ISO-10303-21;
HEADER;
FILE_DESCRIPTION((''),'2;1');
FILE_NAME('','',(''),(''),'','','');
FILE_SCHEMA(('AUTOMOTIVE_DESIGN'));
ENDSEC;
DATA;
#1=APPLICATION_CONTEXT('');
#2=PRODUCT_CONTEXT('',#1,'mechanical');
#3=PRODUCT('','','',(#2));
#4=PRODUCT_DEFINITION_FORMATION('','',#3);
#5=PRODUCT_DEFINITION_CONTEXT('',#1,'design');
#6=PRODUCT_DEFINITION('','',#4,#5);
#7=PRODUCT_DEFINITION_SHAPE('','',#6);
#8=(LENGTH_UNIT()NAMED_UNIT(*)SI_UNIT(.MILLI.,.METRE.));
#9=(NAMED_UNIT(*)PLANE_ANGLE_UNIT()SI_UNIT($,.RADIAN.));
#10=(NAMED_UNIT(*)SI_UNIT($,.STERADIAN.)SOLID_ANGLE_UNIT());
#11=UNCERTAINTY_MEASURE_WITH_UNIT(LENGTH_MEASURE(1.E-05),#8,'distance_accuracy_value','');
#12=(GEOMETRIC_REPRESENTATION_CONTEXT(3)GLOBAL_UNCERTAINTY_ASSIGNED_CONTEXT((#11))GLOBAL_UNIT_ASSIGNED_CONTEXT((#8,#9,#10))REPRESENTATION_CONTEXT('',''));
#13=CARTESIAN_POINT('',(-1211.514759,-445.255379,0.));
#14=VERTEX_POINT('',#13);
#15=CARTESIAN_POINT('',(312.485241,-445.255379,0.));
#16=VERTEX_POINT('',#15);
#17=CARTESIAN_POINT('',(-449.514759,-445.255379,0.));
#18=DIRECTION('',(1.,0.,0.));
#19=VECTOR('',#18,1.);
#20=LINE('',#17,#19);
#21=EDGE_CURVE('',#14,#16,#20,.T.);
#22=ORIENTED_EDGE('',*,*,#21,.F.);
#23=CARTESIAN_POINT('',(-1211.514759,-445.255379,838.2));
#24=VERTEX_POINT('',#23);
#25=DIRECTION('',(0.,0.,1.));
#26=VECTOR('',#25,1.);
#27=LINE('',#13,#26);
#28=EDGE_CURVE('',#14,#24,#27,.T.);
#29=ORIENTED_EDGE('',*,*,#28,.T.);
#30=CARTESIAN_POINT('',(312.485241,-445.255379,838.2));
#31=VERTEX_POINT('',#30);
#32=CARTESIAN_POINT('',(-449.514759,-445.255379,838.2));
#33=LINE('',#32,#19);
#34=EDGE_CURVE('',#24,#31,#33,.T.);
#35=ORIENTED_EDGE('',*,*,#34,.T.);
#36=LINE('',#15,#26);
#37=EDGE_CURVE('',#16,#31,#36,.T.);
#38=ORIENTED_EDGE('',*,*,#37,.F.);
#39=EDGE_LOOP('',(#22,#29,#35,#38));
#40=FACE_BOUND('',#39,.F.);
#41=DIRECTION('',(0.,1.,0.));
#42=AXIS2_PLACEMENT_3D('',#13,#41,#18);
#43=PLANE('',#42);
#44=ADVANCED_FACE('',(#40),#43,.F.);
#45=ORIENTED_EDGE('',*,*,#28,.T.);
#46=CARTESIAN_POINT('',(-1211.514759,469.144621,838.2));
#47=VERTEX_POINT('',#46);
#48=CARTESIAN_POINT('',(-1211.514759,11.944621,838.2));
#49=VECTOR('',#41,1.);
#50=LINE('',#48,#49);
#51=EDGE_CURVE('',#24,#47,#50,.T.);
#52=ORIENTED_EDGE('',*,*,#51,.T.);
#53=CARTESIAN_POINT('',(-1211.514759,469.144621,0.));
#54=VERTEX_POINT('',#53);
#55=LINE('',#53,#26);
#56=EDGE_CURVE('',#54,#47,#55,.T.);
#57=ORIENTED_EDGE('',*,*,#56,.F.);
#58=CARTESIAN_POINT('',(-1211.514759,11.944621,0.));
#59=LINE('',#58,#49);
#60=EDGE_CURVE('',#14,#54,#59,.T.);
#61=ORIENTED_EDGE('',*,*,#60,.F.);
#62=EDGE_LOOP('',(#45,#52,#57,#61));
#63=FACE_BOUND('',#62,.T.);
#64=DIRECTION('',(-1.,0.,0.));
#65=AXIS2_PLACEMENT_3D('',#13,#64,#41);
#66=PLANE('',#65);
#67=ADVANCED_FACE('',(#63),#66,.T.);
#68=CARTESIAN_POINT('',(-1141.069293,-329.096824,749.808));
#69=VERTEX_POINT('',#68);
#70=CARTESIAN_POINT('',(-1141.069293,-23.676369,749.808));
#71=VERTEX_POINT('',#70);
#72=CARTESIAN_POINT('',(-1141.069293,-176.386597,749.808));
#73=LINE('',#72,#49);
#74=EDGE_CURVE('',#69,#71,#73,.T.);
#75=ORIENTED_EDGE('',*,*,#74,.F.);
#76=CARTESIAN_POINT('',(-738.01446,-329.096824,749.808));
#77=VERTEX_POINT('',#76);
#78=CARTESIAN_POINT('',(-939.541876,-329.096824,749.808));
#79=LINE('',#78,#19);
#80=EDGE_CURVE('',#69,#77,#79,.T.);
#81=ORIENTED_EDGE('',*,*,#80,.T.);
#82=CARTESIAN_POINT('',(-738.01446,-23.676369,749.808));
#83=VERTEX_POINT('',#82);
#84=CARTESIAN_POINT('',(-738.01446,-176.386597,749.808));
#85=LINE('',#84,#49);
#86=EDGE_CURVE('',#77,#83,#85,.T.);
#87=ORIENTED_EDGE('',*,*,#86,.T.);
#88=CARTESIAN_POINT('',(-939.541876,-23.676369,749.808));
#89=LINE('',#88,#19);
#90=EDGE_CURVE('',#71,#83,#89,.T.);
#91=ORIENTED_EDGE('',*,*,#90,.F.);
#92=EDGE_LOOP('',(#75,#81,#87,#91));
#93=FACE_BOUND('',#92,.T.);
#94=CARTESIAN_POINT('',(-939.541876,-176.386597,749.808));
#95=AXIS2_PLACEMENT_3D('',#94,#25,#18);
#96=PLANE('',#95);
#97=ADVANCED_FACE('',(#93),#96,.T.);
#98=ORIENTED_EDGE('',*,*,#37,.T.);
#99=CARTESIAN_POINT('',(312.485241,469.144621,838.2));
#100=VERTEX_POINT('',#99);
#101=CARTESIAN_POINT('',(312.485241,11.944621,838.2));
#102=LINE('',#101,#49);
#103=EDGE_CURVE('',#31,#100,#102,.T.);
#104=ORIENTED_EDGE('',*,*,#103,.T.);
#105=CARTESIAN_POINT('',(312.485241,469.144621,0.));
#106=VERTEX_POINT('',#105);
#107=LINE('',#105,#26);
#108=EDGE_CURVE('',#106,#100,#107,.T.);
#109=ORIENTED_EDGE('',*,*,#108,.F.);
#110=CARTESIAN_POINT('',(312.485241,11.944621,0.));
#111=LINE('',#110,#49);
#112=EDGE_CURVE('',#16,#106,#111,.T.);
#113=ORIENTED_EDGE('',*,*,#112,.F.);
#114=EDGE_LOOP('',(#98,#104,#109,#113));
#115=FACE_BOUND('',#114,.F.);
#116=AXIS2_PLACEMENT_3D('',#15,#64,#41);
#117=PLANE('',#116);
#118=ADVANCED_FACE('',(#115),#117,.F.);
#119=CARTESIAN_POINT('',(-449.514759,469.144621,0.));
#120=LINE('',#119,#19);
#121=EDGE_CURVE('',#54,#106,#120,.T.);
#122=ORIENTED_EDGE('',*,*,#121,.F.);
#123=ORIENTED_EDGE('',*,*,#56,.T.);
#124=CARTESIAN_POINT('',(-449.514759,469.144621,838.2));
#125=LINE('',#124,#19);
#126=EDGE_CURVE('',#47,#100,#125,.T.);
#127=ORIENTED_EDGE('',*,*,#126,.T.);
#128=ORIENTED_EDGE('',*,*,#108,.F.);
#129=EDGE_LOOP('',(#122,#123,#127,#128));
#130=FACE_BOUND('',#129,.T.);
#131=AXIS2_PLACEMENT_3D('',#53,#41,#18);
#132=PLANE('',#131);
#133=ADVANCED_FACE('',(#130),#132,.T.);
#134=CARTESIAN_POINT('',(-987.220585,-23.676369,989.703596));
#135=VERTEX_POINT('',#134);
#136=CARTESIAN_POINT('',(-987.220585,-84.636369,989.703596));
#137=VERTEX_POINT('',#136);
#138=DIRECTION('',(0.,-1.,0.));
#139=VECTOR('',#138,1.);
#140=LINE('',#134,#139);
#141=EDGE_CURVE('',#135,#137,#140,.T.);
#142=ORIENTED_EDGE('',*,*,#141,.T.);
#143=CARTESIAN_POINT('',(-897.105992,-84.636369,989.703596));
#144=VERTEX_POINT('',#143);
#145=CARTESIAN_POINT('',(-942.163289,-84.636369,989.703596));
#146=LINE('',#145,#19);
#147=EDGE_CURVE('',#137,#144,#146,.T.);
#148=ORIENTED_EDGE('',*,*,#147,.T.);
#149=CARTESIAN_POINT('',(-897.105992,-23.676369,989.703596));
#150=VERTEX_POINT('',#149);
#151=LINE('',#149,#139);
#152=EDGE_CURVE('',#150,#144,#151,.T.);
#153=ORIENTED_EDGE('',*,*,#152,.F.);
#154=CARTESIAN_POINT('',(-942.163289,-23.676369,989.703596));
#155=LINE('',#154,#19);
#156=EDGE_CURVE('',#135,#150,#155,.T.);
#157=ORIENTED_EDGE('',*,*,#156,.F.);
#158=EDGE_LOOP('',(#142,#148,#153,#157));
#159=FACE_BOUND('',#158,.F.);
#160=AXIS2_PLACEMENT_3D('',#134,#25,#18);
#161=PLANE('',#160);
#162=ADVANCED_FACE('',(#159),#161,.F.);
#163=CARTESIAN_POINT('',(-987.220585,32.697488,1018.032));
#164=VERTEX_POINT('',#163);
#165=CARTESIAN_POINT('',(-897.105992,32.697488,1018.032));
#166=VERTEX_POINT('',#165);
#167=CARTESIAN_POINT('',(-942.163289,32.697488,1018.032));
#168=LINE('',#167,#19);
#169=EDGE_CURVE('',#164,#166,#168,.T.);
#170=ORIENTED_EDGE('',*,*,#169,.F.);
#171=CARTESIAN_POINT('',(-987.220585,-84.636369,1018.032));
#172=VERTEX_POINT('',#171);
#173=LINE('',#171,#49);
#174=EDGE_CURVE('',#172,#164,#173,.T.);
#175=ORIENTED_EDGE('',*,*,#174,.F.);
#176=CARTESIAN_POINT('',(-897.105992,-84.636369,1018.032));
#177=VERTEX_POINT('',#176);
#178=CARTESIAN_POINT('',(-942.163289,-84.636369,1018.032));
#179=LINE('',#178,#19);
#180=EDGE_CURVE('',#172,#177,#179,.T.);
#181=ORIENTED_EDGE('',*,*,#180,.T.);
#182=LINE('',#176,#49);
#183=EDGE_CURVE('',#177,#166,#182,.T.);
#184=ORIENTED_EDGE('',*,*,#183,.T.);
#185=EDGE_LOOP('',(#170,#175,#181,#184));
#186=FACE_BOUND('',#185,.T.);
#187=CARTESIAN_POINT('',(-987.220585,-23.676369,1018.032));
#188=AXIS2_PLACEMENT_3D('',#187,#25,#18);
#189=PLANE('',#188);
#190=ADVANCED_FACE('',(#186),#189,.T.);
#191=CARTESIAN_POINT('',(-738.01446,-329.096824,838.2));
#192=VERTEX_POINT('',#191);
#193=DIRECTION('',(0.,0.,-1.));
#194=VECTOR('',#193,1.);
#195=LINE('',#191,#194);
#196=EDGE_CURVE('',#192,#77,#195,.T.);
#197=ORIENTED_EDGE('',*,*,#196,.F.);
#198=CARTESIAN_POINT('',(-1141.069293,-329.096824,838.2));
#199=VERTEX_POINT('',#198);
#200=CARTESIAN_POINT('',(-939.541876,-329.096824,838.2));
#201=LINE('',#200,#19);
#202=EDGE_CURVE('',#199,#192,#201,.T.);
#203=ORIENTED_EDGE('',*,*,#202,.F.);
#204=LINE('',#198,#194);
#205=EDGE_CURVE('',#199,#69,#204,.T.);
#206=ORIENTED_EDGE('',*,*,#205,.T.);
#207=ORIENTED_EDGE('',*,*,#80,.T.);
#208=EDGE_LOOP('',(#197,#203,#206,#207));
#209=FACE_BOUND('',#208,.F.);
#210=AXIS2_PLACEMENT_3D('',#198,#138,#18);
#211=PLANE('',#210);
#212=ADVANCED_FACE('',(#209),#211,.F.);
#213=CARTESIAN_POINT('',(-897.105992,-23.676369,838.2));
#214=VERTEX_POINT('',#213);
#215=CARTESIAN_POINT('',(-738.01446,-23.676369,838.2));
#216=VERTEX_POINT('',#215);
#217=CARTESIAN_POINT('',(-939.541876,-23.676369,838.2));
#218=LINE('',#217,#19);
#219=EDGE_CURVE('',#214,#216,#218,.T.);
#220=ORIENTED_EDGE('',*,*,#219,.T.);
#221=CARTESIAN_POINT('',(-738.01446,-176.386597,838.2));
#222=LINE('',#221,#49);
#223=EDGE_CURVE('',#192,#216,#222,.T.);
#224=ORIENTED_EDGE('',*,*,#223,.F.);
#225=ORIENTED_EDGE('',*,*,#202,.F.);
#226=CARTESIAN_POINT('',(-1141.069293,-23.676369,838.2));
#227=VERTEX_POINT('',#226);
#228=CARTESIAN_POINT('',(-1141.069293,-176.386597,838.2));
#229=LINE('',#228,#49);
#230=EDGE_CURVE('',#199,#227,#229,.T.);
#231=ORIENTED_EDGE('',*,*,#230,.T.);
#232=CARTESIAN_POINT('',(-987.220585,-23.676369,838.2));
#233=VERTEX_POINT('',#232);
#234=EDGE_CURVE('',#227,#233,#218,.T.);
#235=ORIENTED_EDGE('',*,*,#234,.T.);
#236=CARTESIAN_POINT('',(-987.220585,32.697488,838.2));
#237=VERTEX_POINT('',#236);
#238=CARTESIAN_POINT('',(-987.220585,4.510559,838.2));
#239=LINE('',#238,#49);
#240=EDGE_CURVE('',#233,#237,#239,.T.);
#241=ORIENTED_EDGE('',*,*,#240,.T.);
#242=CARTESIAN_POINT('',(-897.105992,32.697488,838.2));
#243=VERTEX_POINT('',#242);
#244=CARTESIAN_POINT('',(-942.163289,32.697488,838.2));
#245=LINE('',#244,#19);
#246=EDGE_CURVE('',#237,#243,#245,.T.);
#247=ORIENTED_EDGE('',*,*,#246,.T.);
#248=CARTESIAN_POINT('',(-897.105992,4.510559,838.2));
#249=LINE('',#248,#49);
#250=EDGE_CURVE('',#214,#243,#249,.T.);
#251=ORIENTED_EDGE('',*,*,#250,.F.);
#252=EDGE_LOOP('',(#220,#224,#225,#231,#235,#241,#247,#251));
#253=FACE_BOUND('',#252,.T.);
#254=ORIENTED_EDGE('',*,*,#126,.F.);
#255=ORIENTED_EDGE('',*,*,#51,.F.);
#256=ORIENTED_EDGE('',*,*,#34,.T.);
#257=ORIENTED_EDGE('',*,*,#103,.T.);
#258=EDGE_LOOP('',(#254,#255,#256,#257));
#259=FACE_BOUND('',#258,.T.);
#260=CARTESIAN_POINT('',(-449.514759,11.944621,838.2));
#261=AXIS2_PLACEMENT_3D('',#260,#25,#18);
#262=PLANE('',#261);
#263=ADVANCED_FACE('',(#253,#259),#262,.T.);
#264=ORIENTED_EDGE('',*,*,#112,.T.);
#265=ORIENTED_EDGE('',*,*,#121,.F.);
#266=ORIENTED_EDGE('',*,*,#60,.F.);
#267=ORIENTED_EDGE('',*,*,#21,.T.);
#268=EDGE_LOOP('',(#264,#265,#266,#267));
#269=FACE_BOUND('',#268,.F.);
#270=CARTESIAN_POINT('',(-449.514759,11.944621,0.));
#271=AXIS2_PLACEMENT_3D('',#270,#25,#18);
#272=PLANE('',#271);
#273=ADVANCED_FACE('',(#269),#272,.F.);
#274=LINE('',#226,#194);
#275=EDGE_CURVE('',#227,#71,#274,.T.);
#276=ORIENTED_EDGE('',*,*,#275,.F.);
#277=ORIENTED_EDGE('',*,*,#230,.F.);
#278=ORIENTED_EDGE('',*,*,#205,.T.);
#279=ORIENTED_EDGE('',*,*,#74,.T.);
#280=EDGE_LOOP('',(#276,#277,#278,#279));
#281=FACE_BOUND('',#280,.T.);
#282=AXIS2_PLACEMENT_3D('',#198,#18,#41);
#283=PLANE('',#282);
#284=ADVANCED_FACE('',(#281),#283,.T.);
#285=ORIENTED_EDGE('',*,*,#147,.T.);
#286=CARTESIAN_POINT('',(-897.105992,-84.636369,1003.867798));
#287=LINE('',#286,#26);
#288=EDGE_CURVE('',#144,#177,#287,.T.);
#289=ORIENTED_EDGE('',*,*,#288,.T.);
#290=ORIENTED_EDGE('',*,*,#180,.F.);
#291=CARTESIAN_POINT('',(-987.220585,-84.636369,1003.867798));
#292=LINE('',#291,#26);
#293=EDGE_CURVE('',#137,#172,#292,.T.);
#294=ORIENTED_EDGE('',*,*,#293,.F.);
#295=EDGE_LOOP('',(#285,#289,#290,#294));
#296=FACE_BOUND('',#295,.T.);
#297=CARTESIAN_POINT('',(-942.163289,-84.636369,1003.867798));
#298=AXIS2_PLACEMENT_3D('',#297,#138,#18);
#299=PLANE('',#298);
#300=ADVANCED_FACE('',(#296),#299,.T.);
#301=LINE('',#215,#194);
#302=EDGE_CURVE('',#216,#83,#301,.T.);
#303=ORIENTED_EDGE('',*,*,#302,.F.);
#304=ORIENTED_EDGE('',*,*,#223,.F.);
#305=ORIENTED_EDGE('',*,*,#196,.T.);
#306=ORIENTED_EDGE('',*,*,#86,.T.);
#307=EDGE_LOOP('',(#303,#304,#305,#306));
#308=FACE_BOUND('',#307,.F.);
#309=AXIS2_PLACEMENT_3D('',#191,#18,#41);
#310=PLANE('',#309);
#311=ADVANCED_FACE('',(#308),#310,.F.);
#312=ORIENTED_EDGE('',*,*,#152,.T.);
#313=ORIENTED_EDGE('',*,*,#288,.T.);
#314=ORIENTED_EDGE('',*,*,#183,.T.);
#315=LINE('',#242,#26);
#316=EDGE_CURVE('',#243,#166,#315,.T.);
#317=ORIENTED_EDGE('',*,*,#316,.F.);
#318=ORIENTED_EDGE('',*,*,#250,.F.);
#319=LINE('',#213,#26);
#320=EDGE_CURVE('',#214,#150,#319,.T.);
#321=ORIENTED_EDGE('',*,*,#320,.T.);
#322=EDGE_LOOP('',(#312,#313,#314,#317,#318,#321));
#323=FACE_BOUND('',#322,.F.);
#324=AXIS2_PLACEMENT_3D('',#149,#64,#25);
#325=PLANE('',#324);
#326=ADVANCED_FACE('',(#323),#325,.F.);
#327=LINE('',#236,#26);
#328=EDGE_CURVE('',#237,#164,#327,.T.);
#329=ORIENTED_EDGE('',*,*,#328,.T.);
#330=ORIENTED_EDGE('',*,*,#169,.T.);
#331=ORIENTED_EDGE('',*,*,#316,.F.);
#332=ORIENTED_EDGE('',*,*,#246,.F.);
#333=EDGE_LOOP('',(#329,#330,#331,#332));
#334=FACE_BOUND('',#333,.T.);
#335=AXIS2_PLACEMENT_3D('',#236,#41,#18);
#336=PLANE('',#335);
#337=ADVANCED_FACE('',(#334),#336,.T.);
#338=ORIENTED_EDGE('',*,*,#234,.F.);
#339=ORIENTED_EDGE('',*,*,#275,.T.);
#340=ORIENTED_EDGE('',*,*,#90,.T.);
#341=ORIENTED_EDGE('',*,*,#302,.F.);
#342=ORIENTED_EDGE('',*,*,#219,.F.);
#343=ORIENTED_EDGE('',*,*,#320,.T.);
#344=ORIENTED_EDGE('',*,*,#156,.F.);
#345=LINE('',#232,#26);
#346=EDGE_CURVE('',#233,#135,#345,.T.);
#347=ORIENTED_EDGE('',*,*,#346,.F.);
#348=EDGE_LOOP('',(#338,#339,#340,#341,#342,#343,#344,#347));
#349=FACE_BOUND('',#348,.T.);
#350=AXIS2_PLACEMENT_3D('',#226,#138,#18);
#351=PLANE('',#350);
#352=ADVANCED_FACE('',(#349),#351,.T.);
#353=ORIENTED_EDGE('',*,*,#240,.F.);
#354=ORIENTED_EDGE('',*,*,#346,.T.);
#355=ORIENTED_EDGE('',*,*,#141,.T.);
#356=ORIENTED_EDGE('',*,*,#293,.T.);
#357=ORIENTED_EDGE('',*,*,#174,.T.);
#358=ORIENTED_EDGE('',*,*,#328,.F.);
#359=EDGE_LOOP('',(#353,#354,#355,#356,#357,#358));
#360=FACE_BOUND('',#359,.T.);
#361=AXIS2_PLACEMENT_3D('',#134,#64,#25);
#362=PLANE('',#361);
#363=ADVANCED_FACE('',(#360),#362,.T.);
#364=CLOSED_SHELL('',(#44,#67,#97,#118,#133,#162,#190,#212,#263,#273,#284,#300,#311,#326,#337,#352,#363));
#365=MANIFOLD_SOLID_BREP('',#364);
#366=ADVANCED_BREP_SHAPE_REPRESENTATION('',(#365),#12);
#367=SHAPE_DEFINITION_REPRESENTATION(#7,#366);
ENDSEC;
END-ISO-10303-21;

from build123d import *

# Parameters (mm, degrees)
F0_W     = 1524
F0_H     = 914.4
F1_DEPTH = 838.2
F2_W     = 403.0548334122
F2_H     = 305.4204545915
F3_DEPTH = 88.392
F4_W     = 90.1145935059
F4_H     = 56.3738569617
F5_DEPTH = 179.832
F6_W     = 90.1145935059
F6_H     = 28.3284043617
F7_DEPTH = 60.96


with BuildPart() as f1:
    # F0 (on Top) → F1 (new body)
    with BuildSketch(Plane.XY):
        with Locations((-449.5147587423, 11.9446208701)):
            Rectangle(F0_W, F0_H)
    extrude(amount=F1_DEPTH)

    # F2 (on face) → F3 (cut)
    with BuildSketch(Plane.XY.offset(838.2)):
        with Locations((-939.5418763161, -176.386596635)):
            Rectangle(F2_W, F2_H)
    extrude(amount=-F3_DEPTH, mode=Mode.SUBTRACT)

    # F4 (on face) → F5 (join)
    with BuildSketch(Plane.XY.offset(838.2)):
        with Locations((-942.1632885933, 4.5105591416)):
            Rectangle(F4_W, F4_H)
    extrude(amount=F5_DEPTH)

    # F6 (on face) → F7 (join)
    with BuildSketch(Plane.XZ.offset(23.6763693392)):
        with Locations((-942.1632885933, 1003.8677978191)):
            Rectangle(F6_W, F6_H)
    extrude(amount=F7_DEPTH)


solid = f1.part
